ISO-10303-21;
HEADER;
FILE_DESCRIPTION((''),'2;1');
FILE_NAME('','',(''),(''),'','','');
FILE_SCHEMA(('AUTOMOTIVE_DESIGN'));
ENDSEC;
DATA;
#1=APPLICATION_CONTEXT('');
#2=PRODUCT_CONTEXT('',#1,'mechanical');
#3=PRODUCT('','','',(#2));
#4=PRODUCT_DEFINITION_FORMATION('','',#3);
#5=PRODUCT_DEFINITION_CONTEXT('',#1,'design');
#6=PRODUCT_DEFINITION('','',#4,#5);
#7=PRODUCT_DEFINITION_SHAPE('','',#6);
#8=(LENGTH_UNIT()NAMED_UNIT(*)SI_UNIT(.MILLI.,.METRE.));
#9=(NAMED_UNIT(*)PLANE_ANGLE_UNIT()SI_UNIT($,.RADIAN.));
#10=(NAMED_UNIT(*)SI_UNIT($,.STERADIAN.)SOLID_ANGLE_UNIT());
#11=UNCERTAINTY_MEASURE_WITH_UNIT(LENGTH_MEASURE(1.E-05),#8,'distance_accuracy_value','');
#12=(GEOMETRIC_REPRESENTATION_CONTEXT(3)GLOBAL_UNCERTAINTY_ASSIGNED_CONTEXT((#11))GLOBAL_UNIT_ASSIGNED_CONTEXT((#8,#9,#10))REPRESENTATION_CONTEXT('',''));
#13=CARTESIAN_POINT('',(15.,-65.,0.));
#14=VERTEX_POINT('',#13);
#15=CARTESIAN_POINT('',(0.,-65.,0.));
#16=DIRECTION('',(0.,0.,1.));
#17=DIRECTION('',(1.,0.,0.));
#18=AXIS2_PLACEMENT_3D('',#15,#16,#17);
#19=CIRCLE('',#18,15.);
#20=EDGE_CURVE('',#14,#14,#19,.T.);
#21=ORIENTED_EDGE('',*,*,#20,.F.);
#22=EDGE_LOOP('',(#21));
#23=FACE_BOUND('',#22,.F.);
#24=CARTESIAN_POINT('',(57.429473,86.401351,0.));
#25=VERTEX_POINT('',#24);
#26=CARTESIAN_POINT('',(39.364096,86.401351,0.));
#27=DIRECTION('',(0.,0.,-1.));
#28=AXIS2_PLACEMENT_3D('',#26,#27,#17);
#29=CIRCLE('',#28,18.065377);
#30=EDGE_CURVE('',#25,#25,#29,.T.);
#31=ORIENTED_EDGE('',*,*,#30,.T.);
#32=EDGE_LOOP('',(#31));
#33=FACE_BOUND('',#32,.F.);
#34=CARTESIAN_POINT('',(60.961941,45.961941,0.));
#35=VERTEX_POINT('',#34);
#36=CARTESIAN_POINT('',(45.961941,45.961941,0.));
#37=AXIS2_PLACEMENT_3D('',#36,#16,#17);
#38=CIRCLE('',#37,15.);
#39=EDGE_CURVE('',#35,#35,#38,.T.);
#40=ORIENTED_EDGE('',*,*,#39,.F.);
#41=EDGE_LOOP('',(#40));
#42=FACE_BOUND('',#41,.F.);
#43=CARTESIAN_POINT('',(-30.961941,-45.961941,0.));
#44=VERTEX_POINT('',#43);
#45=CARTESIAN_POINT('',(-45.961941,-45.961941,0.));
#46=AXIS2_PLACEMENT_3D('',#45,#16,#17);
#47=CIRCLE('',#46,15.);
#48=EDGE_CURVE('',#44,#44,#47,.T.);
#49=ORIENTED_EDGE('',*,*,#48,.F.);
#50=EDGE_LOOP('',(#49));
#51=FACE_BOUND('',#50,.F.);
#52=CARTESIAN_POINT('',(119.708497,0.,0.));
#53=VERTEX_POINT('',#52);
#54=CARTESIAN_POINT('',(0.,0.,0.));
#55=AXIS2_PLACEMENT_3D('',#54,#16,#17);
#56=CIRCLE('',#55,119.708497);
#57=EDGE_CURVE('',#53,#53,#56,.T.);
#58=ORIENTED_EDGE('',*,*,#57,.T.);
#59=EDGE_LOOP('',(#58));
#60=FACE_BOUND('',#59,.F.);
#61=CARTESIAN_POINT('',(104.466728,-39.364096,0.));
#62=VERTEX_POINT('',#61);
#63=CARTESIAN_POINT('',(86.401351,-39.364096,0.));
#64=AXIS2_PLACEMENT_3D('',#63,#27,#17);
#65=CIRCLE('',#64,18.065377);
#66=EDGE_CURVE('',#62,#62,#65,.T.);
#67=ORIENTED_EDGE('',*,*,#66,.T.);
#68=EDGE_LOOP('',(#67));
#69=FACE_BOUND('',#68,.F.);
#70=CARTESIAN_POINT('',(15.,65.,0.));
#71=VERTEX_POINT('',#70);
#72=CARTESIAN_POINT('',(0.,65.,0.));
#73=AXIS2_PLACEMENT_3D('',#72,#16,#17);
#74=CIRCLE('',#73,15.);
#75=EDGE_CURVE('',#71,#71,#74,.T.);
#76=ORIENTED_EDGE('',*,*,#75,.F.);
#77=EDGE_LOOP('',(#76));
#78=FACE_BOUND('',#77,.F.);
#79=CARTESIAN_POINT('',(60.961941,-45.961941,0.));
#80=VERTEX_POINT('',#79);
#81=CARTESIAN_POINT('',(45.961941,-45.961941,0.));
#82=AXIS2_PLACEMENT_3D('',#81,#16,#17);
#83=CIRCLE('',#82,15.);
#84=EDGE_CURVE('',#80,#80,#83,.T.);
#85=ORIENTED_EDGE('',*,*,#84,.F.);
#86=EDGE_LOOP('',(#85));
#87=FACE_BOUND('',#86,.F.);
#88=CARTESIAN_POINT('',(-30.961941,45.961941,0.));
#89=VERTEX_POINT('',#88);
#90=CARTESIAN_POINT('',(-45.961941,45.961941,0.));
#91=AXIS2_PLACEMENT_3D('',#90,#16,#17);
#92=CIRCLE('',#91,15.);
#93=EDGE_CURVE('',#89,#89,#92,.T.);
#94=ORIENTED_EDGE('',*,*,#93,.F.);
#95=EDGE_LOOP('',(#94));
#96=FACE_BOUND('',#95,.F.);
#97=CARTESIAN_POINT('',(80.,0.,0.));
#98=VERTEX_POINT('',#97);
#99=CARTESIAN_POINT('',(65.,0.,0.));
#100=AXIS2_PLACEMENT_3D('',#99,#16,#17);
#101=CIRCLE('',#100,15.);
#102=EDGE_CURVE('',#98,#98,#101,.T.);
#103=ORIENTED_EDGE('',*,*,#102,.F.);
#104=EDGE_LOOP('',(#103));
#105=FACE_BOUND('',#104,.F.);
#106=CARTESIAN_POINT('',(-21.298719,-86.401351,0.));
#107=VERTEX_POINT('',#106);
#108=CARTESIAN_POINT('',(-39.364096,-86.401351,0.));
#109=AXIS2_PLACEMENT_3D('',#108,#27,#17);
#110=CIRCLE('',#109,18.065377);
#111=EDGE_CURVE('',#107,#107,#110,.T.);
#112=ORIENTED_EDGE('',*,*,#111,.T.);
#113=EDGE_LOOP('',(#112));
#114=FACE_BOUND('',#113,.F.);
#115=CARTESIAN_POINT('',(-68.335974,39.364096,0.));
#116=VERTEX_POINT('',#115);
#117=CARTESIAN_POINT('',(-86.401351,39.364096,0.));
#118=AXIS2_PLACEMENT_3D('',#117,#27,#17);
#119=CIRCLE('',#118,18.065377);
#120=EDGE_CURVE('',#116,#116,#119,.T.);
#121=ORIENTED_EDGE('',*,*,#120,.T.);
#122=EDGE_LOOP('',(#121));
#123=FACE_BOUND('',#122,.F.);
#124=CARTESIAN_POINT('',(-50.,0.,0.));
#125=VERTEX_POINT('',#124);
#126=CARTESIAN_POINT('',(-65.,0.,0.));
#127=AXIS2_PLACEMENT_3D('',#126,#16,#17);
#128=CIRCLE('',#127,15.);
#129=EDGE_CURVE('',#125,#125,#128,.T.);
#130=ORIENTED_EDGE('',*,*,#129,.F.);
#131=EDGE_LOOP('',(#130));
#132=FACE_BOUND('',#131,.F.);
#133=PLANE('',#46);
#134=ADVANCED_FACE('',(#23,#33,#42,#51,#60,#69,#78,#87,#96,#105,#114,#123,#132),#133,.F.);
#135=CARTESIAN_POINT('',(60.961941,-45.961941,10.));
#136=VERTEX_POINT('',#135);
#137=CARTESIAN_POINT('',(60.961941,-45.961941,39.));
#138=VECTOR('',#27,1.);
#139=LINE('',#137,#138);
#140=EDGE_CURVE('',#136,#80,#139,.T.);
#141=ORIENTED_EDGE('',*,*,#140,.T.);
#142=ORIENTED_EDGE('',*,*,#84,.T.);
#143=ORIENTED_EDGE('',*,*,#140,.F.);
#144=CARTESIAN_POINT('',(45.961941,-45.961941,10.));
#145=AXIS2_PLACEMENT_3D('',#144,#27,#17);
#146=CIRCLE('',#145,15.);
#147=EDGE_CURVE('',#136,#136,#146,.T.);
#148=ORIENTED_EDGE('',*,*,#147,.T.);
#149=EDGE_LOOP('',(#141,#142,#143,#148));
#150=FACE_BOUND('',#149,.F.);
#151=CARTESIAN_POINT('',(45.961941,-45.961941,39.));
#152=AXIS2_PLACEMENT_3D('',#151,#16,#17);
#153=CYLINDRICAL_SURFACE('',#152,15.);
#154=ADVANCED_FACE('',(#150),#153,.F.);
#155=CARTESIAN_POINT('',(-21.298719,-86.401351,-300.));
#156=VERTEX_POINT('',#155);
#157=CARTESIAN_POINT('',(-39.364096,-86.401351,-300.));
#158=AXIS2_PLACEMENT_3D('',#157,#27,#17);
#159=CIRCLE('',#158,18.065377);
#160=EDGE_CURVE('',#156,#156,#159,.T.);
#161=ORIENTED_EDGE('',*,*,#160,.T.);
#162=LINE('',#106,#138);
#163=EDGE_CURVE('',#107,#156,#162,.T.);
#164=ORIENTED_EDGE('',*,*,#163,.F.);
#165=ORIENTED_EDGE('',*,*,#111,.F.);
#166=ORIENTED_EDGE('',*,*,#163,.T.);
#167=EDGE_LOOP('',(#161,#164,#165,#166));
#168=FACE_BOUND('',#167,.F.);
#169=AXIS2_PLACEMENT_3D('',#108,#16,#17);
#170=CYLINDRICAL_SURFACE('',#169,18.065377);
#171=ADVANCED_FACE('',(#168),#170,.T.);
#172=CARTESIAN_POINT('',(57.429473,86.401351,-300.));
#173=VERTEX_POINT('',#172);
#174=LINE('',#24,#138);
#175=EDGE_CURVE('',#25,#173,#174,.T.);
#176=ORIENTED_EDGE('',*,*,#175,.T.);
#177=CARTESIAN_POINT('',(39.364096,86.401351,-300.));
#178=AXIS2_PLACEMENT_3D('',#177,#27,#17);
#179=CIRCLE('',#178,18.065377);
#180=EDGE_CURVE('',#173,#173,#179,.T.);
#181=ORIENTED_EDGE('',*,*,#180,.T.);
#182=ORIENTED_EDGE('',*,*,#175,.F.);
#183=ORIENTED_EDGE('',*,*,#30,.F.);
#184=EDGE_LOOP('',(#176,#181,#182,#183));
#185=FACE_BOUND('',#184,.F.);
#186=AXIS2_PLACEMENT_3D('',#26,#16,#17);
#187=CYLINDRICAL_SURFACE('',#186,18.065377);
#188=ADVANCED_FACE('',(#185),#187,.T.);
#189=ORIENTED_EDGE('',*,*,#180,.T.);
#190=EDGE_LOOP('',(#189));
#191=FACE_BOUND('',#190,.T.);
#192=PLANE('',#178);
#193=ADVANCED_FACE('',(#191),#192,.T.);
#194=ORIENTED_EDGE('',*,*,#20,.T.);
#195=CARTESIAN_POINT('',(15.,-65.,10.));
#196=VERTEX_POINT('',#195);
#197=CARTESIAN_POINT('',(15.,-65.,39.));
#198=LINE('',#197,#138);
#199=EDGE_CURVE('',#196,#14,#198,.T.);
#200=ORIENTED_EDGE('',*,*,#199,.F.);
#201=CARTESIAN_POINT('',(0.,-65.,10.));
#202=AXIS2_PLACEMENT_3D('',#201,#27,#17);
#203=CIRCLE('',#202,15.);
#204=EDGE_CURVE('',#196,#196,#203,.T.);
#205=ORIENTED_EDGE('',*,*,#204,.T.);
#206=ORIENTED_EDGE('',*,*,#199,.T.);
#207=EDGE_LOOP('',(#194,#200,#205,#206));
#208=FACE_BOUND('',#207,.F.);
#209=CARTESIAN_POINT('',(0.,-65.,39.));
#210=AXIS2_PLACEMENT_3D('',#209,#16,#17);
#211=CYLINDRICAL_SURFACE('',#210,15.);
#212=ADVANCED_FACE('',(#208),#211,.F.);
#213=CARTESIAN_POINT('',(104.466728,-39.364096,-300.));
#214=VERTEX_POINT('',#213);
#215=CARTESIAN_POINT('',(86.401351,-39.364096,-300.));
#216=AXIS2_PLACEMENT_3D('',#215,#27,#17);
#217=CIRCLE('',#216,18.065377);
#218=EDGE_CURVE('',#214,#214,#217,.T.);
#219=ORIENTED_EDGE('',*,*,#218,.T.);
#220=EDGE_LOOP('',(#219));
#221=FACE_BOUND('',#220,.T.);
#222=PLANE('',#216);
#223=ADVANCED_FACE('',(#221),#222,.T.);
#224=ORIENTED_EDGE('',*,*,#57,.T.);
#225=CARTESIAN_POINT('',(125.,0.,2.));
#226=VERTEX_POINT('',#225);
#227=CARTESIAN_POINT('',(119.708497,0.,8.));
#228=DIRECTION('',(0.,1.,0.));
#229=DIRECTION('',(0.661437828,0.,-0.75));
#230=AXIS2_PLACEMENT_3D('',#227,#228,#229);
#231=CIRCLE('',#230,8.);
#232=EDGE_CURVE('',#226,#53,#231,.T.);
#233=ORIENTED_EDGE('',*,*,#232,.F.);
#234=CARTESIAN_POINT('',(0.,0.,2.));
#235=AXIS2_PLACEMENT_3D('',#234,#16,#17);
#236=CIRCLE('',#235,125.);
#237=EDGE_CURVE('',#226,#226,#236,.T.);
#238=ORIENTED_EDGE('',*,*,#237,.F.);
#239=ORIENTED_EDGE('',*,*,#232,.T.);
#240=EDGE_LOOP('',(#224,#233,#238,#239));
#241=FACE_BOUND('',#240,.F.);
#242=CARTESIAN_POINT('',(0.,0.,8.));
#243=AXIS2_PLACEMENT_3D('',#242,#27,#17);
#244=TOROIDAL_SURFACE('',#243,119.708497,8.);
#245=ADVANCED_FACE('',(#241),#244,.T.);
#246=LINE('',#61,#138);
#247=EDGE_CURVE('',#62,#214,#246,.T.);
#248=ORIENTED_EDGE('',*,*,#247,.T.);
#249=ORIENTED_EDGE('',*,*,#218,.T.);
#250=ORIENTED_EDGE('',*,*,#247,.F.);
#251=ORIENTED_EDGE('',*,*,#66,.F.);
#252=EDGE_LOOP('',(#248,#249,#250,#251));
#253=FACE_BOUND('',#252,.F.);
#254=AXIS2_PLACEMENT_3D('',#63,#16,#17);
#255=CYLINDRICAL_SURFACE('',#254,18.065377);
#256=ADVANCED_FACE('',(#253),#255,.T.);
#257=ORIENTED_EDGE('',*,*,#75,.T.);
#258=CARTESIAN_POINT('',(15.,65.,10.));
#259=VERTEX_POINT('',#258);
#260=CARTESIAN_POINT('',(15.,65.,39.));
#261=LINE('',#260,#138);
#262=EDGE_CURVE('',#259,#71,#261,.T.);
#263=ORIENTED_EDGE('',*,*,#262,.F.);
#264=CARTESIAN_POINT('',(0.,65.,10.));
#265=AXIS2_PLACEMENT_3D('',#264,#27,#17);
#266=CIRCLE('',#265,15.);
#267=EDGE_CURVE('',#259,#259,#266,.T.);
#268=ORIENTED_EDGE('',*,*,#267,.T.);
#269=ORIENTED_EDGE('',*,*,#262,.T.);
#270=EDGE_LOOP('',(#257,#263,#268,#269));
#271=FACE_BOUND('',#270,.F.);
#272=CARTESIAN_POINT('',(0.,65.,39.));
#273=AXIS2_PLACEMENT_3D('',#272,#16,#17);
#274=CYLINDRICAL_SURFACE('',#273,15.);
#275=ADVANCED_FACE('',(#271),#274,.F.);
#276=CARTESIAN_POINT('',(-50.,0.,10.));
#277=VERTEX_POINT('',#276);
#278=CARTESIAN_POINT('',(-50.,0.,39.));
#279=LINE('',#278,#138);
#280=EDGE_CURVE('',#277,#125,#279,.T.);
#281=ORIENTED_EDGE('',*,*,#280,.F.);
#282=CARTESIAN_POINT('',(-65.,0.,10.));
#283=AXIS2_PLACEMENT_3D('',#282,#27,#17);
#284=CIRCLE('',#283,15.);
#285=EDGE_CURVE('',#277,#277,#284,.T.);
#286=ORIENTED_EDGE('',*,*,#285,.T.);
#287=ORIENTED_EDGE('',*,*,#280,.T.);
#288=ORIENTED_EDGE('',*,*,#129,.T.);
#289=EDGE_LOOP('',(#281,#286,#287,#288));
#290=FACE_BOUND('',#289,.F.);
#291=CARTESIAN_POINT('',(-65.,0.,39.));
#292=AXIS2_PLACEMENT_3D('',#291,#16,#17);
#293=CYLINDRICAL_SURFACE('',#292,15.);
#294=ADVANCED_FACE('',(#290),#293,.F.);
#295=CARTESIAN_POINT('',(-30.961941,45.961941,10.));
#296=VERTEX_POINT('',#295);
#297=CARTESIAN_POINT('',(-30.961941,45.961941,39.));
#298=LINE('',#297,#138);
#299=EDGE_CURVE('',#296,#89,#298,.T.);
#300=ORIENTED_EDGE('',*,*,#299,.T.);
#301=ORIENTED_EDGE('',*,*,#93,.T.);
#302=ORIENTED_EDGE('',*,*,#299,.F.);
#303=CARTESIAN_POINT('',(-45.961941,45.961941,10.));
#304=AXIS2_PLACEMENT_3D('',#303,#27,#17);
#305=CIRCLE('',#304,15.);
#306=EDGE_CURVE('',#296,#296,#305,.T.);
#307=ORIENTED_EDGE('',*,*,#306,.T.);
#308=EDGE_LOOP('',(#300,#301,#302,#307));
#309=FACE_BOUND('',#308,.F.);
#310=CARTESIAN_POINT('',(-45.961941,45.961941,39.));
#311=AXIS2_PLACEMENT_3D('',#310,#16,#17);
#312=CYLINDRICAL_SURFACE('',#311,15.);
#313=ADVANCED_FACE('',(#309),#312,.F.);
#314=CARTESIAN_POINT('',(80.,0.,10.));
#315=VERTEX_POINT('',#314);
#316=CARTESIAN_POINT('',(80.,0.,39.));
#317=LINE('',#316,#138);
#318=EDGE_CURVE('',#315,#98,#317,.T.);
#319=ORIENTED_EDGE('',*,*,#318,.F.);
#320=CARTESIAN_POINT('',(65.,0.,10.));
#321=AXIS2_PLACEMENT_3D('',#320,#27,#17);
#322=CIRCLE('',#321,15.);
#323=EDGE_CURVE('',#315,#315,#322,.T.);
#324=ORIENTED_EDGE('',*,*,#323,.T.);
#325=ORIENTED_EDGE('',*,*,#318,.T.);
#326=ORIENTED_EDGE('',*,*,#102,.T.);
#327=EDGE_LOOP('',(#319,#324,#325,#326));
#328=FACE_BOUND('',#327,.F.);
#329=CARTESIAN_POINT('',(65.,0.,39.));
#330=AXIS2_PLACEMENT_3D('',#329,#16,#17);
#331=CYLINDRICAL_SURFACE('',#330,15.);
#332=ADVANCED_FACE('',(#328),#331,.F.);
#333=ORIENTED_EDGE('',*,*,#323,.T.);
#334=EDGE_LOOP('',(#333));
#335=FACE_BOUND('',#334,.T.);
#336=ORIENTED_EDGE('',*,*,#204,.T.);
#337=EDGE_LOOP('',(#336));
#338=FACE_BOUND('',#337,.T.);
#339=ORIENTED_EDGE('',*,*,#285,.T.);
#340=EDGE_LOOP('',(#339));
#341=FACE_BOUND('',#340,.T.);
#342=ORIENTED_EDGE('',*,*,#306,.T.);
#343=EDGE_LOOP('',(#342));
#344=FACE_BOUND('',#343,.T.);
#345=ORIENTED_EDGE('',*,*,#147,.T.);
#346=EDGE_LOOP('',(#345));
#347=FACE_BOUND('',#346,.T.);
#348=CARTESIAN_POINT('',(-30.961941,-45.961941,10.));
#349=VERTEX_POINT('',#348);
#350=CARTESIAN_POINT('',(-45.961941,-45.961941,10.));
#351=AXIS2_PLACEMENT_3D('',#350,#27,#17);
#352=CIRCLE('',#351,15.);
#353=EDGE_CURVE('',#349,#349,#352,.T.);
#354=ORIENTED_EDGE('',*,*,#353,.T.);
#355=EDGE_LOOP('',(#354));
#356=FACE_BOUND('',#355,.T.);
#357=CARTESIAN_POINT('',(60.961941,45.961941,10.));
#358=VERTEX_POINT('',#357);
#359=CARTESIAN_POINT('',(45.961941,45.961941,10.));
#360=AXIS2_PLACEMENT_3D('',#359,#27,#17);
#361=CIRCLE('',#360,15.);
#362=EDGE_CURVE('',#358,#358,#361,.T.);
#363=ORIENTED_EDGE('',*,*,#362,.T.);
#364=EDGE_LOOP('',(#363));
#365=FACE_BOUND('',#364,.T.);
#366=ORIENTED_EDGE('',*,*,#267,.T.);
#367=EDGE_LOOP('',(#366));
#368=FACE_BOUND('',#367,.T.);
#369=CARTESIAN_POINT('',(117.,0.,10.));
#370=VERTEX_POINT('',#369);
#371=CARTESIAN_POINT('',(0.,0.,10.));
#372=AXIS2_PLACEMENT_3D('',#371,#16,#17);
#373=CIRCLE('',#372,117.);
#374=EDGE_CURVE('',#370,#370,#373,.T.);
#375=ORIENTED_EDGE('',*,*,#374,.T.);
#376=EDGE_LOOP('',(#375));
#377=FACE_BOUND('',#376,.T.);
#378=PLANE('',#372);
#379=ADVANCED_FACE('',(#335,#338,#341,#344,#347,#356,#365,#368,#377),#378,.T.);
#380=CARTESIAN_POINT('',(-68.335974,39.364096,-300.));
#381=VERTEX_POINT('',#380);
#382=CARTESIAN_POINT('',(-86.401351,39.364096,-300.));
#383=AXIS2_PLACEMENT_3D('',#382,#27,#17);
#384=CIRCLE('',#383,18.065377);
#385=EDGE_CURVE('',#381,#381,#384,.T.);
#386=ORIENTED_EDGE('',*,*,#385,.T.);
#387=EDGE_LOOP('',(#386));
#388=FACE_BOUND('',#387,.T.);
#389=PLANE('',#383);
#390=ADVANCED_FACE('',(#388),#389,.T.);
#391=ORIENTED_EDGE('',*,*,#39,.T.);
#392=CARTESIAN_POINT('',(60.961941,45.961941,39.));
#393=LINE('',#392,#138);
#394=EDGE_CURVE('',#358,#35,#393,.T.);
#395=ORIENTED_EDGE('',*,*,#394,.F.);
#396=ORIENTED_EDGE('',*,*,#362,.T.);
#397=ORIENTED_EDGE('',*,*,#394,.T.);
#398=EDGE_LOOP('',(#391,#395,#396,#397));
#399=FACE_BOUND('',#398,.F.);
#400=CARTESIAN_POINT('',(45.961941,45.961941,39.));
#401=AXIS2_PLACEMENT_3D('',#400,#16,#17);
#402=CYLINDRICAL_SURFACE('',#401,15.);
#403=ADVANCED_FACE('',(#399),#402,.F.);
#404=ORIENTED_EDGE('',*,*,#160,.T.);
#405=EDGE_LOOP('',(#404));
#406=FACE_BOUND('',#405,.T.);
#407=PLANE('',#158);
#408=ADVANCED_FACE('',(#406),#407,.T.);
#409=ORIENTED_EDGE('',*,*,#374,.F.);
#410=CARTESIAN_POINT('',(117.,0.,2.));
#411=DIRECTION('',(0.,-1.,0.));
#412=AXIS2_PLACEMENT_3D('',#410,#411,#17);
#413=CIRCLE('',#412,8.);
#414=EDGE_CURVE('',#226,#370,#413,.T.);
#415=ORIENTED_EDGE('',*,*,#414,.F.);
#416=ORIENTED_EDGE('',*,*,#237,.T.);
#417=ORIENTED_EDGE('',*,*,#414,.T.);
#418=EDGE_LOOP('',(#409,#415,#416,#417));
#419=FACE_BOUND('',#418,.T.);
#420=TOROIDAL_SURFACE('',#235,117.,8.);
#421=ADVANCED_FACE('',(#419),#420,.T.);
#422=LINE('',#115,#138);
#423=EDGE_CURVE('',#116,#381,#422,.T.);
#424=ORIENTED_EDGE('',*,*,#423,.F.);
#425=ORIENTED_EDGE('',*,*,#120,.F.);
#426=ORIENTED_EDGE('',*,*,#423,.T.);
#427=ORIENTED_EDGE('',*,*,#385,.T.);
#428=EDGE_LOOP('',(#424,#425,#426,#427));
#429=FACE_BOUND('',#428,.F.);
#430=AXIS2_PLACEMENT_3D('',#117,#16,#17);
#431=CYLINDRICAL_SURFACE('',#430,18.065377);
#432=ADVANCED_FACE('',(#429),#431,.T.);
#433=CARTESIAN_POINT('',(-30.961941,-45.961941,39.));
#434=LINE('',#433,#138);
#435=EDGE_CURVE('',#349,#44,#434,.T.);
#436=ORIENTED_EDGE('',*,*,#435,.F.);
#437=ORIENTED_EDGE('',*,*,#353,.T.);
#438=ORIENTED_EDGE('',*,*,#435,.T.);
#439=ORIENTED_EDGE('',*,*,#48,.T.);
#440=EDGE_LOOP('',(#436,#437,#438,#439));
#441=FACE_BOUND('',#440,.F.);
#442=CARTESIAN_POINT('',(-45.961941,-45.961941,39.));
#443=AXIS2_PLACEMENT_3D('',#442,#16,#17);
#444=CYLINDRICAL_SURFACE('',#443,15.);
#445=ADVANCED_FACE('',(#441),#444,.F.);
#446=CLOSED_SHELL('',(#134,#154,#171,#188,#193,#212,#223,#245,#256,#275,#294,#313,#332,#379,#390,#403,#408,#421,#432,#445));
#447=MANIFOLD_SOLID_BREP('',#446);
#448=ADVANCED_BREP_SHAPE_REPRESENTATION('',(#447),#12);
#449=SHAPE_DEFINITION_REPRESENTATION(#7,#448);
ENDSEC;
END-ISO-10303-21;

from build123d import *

# Parameters (mm, degrees)
F0_R     = 125
F2_DEPTH = 10
F1_R     = 15
F3_DEPTH = 39
F4_DEPTH = 107
F5_R     = 8
F7_R     = 18.065377162
F8_DEPTH = 300


# Not quite as in the source:
# - a fillet or chamfer that OpenCascade refuses, or shapes differently, is made with other operations: its cross-section is extruded or revolved along the edge and cut away or added


with BuildPart() as f2:
    # F0 (on Top) → F2 (new body)
    with BuildSketch(Plane.XY):
        Circle(F0_R)
    extrude(amount=F2_DEPTH)

    # F1 (on face) → F3 (join)
    with BuildSketch(Plane.XY):
        with Locations((-45.9619407771, -45.9619407771)):
            Circle(F1_R)
        with Locations((-65, 0)):
            Circle(F1_R)
        with Locations((0, 65)):
            Circle(F1_R)
        with Locations((0, -65)):
            Circle(F1_R)
        with Locations((45.9619407771, -45.9619407771)):
            Circle(F1_R)
        with Locations((65, 0)):
            Circle(F1_R)
        with Locations((45.9619407771, 45.9619407771)):
            Circle(F1_R)
        with Locations((-45.9619407771, 45.9619407771)):
            Circle(F1_R)
    extrude(amount=F3_DEPTH)

    # F4 (cut): faces of the model
    f4_faces = [f2.faces().sort_by_distance(p)[0] for p in [
        (-45.9619407771, -45.9619407771, 39),
        (0, -65, 39),
        (45.9619407771, -45.9619407771, 39),
        (65, 0, 39),
        (45.9619407771, 45.9619407771, 39),
        (0, 65, 39),
        (-45.9619407771, 45.9619407771, 39),
        (-65, 0, 39),
    ]]
    extrude(f4_faces, amount=-F4_DEPTH, mode=Mode.SUBTRACT)

    # F5
    f5_edges = [f2.edges().sort_by_distance(p)[0] for p in [
        (-125, 0, 10),
    ]]
    fillet(f5_edges, radius=F5_R)

    # F6: fillet of radius 8 on 1 edges, made by hand

    # F6_s1 → F6_t2 (revolve, cut)
    with BuildSketch(Plane.XZ):
        with BuildLine():
            ThreePointArc((125, 2), (122.5369245026, 0.5166852265), (119.7084973779, 0))
            Line((119.7084973779, 0), (125, 0))
            Line((125, 0), (125, 2))
        make_face()
    revolve(axis=Axis((0, 0, 0), (0, 0, 1)), mode=Mode.SUBTRACT)

    # F7 (on face) → F8 (join)
    with BuildSketch(Plane(origin=(0, 0, 0), x_dir=(1, 0, 0), z_dir=(0, 0, -1))):
        with Locations((39.3640957773, -86.4013507962)):
            Circle(F7_R)
        with Locations((-86.4013507962, -39.3640957773)):
            Circle(F7_R)
        with Locations((-39.3640957773, 86.4013507962)):
            Circle(F7_R)
        with Locations((86.4013507962, 39.3640957773)):
            Circle(F7_R)
    extrude(amount=F8_DEPTH)


solid = f2.part
